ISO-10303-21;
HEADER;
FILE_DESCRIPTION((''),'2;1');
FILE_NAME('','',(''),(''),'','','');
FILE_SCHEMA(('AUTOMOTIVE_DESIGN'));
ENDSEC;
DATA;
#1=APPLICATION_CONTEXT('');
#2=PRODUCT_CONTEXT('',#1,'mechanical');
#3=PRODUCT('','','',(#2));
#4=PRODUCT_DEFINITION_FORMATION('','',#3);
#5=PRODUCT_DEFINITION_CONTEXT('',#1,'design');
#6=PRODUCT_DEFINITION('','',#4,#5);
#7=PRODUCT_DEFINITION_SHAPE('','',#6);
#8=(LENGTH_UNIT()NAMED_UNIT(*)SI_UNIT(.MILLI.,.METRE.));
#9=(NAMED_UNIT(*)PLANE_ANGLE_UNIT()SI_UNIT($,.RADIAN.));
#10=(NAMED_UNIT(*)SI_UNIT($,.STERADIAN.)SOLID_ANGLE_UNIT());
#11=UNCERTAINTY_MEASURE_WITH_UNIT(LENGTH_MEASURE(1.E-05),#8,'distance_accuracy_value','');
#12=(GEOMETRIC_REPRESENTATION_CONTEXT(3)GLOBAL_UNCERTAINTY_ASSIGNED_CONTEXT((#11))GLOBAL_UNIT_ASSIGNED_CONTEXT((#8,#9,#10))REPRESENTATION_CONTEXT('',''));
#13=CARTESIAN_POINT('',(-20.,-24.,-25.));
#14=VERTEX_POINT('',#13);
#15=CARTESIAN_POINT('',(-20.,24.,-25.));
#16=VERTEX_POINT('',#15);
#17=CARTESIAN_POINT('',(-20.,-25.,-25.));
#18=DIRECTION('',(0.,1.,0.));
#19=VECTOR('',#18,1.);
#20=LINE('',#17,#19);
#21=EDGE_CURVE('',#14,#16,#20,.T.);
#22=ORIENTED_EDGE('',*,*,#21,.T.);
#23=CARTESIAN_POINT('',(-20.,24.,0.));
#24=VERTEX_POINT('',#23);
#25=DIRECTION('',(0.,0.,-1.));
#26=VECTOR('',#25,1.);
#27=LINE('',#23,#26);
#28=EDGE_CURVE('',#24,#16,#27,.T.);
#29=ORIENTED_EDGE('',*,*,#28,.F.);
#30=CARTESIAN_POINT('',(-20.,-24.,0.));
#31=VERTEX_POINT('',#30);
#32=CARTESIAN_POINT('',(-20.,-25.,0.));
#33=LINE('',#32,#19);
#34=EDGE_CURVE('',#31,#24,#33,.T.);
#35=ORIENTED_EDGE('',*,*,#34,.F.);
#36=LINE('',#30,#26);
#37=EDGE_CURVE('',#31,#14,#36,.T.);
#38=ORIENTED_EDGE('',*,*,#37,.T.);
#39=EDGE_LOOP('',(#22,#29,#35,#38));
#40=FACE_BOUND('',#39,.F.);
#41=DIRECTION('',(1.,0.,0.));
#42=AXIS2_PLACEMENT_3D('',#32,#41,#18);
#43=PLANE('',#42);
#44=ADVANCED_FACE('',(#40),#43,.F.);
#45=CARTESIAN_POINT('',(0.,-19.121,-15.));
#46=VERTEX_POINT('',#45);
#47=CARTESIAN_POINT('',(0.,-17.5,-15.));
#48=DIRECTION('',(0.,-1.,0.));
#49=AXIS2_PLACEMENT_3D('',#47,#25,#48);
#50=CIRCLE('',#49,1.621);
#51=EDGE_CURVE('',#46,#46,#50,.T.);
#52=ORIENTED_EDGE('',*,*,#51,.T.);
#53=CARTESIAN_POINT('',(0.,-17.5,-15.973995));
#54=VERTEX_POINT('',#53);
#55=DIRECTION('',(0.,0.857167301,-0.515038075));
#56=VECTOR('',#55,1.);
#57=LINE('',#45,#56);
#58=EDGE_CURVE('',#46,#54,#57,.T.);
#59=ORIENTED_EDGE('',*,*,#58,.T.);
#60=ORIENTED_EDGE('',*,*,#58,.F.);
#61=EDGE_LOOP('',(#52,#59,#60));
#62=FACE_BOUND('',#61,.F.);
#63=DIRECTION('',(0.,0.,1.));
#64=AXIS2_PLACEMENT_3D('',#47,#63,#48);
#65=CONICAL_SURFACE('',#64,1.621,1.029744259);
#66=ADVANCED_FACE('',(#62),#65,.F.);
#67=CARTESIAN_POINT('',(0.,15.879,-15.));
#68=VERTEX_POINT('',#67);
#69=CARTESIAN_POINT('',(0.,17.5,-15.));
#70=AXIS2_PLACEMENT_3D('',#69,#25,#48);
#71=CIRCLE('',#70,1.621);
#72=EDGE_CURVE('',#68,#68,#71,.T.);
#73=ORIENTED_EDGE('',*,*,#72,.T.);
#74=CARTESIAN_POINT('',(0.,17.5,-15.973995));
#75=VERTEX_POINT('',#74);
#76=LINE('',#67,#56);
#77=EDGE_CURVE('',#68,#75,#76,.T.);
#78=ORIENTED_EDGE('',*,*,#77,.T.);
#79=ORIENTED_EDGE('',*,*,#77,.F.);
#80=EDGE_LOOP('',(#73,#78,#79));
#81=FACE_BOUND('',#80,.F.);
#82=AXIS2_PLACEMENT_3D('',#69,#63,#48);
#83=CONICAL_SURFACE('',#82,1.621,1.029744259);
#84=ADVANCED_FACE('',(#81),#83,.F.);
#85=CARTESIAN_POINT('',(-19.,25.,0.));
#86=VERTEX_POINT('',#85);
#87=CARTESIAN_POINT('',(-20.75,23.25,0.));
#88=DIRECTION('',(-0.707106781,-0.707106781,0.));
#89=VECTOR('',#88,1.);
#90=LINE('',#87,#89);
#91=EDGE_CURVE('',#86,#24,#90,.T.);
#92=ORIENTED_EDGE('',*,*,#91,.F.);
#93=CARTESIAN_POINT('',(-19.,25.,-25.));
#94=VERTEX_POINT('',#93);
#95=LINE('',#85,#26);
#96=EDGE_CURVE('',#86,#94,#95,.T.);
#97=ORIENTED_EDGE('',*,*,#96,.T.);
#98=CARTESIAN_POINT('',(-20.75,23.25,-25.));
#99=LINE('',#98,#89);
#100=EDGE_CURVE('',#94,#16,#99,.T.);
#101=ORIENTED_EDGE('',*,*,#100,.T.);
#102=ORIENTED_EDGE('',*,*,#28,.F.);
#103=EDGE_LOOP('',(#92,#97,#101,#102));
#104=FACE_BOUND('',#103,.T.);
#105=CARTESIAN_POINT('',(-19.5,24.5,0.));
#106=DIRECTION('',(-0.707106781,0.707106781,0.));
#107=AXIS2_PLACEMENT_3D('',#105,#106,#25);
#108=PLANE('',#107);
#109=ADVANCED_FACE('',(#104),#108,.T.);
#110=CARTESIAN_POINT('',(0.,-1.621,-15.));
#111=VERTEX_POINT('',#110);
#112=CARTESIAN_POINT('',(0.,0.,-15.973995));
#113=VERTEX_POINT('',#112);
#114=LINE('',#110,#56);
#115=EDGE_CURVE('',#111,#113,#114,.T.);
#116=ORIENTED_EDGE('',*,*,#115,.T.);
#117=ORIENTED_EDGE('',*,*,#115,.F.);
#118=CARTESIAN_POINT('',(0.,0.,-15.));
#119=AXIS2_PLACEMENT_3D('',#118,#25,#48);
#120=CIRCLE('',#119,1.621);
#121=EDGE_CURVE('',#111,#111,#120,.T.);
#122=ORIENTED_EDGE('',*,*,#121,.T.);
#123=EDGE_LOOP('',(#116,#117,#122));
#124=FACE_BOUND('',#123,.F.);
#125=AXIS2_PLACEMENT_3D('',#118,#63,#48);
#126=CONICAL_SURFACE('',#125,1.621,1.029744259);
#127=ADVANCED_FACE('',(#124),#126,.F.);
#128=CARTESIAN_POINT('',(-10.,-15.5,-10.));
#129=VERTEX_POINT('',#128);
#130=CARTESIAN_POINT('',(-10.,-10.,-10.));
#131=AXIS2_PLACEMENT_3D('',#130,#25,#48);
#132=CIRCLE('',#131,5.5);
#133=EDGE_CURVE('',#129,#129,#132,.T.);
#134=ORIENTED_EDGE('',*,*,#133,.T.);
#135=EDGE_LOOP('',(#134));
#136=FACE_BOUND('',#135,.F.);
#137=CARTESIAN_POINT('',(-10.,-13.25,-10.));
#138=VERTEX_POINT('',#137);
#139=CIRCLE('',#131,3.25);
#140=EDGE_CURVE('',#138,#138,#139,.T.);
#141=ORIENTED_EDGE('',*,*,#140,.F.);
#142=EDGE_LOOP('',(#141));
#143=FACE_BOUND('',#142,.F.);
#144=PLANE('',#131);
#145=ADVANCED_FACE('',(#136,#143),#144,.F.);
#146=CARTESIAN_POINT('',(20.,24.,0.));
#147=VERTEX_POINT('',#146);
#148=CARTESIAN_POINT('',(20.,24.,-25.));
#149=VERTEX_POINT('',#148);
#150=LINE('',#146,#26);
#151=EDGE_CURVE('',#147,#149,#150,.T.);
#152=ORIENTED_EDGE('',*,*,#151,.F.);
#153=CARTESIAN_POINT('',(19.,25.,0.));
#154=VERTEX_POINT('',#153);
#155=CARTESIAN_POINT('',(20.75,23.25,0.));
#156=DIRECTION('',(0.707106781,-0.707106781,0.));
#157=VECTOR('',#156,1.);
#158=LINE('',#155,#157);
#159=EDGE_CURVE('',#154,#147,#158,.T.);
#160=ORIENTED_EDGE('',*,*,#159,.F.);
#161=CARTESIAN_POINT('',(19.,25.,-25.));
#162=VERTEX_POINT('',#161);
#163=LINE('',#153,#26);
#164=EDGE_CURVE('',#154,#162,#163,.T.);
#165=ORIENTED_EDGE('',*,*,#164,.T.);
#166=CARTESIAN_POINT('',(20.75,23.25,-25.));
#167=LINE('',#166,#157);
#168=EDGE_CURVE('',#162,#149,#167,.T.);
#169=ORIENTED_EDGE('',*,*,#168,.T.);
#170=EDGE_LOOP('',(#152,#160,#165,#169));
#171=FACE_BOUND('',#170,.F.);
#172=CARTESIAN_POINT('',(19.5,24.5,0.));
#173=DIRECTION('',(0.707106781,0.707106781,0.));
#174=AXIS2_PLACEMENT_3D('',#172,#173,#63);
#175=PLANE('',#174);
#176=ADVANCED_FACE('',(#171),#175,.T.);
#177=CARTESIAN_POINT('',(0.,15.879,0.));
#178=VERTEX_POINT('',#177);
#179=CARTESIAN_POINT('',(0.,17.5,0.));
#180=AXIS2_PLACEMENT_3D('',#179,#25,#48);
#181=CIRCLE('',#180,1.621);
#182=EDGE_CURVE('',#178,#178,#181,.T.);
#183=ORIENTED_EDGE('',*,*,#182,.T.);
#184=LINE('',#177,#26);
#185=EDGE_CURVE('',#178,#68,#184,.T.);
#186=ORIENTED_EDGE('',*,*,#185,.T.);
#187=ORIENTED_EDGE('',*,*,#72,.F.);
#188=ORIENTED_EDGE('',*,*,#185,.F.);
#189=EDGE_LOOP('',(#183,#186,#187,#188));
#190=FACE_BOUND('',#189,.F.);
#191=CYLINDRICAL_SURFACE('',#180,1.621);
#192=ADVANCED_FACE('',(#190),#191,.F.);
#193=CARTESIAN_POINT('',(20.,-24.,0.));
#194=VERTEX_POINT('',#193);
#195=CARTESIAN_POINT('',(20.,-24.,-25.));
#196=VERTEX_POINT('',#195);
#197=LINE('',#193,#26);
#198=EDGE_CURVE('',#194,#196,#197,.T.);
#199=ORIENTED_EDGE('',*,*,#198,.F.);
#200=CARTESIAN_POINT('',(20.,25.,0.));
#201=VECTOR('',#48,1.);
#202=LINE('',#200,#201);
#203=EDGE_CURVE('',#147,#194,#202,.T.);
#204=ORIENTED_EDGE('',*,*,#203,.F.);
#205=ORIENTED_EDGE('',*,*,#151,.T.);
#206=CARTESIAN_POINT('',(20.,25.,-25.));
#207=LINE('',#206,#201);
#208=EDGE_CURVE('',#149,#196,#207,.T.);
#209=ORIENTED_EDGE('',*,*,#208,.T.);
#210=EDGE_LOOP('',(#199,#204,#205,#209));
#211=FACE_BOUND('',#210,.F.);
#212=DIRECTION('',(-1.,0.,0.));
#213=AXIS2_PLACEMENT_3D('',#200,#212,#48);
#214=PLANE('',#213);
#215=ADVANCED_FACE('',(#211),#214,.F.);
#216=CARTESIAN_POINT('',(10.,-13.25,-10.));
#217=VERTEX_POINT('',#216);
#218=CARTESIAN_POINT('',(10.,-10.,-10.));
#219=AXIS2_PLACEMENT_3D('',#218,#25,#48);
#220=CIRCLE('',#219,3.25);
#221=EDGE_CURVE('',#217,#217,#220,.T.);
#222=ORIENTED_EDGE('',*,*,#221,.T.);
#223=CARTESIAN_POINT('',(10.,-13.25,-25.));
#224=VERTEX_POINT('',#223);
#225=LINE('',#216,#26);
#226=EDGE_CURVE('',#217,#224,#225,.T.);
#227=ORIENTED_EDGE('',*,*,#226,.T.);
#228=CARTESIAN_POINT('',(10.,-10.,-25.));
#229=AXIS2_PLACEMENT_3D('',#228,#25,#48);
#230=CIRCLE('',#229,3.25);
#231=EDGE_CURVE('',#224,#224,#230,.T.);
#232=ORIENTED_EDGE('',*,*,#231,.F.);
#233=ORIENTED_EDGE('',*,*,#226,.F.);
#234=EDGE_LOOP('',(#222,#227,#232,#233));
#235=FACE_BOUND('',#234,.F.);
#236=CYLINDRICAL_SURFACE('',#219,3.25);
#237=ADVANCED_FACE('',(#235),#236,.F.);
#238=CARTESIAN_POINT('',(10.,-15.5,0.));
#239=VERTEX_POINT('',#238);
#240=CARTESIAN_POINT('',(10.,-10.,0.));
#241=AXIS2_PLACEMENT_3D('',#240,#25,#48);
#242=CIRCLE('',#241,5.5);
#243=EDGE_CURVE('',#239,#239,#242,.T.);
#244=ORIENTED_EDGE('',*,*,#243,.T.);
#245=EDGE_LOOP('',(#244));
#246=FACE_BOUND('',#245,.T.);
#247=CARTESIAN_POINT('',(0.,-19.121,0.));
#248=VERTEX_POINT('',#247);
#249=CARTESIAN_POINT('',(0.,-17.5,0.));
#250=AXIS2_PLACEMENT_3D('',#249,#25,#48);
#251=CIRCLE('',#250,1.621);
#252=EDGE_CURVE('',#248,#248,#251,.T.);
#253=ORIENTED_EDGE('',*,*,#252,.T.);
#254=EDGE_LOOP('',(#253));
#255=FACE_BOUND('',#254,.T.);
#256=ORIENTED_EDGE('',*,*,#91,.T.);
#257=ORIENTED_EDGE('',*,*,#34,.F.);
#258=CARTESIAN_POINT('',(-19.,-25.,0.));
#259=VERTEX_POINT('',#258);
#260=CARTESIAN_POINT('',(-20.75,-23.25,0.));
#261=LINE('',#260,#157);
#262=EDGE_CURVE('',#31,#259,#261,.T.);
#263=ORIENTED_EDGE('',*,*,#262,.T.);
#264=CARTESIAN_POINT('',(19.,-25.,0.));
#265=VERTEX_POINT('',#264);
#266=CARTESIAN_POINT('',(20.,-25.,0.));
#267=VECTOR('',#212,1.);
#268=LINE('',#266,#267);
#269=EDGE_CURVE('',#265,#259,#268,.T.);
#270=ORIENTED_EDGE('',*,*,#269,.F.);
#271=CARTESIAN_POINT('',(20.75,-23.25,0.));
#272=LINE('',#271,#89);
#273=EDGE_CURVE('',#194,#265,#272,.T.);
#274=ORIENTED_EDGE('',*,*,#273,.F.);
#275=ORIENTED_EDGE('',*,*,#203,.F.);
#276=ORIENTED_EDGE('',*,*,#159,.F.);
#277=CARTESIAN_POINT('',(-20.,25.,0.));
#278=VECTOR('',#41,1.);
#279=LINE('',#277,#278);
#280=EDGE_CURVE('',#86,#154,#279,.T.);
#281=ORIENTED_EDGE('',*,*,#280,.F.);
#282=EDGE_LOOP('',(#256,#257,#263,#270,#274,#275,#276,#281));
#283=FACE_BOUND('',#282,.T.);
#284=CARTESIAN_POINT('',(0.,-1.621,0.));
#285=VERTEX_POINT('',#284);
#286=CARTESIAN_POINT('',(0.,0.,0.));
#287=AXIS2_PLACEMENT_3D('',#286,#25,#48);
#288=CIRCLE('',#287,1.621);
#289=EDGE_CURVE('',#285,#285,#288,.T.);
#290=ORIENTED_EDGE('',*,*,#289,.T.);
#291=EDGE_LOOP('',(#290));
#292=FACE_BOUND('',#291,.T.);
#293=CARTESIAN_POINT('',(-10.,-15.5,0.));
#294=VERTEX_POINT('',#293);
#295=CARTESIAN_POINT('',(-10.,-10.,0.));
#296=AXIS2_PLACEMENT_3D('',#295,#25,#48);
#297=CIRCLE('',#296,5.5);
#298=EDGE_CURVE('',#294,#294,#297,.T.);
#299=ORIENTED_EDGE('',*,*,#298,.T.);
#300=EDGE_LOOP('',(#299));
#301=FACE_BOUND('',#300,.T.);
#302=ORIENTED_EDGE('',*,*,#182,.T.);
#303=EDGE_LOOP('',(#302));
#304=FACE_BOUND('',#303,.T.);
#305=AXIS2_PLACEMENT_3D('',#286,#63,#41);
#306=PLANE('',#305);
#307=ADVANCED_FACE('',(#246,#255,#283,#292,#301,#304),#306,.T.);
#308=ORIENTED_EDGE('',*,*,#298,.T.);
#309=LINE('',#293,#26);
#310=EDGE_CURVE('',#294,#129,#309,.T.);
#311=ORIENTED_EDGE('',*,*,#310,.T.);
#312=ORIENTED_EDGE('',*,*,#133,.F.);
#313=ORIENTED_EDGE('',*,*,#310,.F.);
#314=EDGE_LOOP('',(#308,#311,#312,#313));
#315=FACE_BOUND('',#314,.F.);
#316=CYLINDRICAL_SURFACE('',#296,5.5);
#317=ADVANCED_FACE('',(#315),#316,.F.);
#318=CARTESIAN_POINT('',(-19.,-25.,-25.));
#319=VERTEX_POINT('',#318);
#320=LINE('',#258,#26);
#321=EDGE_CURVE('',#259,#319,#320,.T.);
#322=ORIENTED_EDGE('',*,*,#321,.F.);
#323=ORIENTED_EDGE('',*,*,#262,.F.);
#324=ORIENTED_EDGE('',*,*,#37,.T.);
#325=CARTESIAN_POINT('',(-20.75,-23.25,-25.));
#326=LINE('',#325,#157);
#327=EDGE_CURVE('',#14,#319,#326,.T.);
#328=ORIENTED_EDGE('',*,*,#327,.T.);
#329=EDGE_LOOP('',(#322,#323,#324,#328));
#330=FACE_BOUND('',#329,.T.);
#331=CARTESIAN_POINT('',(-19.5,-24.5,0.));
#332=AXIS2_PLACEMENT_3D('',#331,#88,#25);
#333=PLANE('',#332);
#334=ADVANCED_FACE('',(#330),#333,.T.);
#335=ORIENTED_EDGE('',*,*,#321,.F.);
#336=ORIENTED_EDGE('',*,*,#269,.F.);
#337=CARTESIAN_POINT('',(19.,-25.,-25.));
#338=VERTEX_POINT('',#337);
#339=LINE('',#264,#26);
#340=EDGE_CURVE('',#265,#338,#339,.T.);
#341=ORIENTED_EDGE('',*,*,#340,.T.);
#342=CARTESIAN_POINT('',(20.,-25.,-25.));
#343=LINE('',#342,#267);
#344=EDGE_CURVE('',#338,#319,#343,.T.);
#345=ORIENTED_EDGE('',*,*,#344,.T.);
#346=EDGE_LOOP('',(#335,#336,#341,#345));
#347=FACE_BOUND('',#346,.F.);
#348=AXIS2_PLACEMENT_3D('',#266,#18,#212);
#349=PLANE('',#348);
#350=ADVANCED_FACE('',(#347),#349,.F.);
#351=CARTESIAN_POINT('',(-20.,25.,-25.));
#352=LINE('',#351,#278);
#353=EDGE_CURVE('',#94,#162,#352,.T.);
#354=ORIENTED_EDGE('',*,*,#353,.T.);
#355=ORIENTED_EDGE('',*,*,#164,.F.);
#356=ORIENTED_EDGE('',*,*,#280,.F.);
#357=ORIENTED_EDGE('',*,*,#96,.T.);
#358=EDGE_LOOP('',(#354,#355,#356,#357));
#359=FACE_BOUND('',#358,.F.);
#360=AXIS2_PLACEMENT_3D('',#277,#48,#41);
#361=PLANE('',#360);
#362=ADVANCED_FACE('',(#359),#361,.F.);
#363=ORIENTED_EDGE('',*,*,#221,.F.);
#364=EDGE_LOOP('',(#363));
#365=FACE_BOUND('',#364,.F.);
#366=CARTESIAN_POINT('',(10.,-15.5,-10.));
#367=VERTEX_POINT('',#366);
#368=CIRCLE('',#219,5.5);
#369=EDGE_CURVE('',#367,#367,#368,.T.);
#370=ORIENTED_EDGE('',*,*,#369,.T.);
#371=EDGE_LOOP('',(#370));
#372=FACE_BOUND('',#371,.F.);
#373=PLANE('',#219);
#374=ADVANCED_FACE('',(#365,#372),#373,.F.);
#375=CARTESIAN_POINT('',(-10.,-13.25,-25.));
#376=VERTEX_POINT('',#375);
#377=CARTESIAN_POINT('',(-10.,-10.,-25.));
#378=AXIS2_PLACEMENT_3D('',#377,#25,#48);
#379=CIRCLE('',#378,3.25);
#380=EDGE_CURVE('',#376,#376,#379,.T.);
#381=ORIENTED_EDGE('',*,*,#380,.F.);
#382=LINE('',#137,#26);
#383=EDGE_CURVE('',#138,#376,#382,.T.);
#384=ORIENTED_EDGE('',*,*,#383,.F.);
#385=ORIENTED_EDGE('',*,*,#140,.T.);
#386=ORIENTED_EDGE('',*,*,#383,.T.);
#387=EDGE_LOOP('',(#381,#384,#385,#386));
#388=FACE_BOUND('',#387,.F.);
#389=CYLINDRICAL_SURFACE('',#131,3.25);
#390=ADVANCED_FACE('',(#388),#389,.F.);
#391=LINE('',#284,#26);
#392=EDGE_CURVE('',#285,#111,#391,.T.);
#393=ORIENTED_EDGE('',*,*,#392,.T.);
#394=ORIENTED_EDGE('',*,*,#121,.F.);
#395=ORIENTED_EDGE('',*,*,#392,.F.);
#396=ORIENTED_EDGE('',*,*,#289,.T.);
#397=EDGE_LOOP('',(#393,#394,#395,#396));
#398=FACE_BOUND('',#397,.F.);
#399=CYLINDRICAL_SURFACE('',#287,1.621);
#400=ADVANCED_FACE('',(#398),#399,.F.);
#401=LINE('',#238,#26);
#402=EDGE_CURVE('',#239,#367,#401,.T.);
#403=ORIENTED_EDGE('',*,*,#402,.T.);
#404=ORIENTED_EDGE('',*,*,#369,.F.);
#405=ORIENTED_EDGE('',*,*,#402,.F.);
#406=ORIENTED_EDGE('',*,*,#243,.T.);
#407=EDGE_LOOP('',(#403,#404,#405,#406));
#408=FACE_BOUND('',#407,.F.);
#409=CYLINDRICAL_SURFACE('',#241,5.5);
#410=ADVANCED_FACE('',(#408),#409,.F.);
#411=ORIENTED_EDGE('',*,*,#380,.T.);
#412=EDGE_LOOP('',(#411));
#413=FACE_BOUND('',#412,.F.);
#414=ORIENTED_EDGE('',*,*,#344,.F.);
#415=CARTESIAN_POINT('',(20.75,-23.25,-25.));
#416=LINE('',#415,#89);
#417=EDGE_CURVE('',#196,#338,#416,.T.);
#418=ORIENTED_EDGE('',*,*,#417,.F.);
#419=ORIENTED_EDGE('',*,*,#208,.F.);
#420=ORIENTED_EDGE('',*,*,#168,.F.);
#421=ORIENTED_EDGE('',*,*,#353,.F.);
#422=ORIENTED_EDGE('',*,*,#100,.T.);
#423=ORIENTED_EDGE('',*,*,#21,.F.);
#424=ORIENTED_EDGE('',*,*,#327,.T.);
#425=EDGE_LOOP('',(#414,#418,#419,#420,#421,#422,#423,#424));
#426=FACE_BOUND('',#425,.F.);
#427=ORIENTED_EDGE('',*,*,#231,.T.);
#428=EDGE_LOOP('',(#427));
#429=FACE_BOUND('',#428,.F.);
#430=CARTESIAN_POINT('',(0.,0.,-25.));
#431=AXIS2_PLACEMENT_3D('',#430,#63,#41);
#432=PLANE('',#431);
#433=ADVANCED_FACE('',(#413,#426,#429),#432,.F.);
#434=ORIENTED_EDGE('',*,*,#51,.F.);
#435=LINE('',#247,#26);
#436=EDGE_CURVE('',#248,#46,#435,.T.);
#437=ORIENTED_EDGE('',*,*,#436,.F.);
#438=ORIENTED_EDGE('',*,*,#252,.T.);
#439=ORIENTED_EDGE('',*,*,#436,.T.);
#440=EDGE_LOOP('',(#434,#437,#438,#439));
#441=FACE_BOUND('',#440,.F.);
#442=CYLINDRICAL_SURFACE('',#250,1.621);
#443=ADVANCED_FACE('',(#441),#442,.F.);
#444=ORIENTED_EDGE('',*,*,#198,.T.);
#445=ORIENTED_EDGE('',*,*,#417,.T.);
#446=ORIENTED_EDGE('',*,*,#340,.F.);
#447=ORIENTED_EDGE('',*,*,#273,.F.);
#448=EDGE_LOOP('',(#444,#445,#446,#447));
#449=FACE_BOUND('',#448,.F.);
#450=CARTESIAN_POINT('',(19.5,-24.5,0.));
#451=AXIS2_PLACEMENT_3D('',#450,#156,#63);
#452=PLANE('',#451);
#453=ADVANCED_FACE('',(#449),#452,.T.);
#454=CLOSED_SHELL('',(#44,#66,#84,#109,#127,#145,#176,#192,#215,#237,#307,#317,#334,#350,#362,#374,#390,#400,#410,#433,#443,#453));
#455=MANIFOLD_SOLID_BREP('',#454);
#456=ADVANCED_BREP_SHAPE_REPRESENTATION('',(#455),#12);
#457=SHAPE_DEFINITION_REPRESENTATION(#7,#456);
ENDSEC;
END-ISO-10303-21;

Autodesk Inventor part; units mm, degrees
ref_plane "YZ Plane" through (0, 0, 0) normal (1, 0, 0) x (0, 1, 0)
ref_plane "XZ Plane" through (0, 0, 0) normal (0, 1, 0) x (-1, 0, 0)
ref_plane "XY Plane" through (0, 0, 0) normal (0, 0, 1) x (1, 0, 0)
sketch "Esboço1" plane through (0, 0, 0) normal (0, 0, 1) x (1, 0, 0)
  line L0 (-28, 0) -> (28, 0) construction
  line L1 (0, -35) -> (0, 35) construction
  line L2 (-20, 25) -> (20, 25)
  line L3 (20, 25) -> (20, -25)
  line L4 (20, -25) -> (-20, -25)
  line L5 (-20, -25) -> (-20, 25)
  line L6 (-10, 25) -> (-10, -25) construction
  line L7 (10, 25) -> (10, -25) construction
  line L8 (-20, -10) -> (20, -10) construction
  point P0 (0, 0)
  point P1 (-10, -10)
  point P2 (10, -10)
  point P3 (0, -17.5)
  point P4 (0, 0)
  point P5 (0, 17.5)
  dimension "d0" = 40
  dimension "d1" = 50
  dimension "d2" = 20
  dimension "d3" = 15
  dimension "d13" = 35
extrude "Extrusão1" add sketch "Esboço1" against normal blind 25
hole "Furo1" at (-10, -10, 0) at (10, -10, 0) direction (0, 0, -1) diameter 6.5 end through all counterbore diameter 11 counterbore depth 10 clearance for "Socket Head Cap Screw ISO 4762" size "M6" standard "ISO"
hole "Furo2" at (0, -17.5, 0) at (0, 0, 0) at (0, 17.5, 0) direction (0, 0, -1) diameter 3.242 depth 15 tip angle 118 thread size "M4x0.7" class "6H" standard "ISO Metric profile"
chamfer "Chanfro1" distance 1 angle 45 4 edges at (-20, -25, -12.5) (-20, 25, -12.5) (20, 25, -12.5) (20, -25, -12.5)
properties part number "Chapa Suporte Trilho 1" material "Poliacetal WT"
